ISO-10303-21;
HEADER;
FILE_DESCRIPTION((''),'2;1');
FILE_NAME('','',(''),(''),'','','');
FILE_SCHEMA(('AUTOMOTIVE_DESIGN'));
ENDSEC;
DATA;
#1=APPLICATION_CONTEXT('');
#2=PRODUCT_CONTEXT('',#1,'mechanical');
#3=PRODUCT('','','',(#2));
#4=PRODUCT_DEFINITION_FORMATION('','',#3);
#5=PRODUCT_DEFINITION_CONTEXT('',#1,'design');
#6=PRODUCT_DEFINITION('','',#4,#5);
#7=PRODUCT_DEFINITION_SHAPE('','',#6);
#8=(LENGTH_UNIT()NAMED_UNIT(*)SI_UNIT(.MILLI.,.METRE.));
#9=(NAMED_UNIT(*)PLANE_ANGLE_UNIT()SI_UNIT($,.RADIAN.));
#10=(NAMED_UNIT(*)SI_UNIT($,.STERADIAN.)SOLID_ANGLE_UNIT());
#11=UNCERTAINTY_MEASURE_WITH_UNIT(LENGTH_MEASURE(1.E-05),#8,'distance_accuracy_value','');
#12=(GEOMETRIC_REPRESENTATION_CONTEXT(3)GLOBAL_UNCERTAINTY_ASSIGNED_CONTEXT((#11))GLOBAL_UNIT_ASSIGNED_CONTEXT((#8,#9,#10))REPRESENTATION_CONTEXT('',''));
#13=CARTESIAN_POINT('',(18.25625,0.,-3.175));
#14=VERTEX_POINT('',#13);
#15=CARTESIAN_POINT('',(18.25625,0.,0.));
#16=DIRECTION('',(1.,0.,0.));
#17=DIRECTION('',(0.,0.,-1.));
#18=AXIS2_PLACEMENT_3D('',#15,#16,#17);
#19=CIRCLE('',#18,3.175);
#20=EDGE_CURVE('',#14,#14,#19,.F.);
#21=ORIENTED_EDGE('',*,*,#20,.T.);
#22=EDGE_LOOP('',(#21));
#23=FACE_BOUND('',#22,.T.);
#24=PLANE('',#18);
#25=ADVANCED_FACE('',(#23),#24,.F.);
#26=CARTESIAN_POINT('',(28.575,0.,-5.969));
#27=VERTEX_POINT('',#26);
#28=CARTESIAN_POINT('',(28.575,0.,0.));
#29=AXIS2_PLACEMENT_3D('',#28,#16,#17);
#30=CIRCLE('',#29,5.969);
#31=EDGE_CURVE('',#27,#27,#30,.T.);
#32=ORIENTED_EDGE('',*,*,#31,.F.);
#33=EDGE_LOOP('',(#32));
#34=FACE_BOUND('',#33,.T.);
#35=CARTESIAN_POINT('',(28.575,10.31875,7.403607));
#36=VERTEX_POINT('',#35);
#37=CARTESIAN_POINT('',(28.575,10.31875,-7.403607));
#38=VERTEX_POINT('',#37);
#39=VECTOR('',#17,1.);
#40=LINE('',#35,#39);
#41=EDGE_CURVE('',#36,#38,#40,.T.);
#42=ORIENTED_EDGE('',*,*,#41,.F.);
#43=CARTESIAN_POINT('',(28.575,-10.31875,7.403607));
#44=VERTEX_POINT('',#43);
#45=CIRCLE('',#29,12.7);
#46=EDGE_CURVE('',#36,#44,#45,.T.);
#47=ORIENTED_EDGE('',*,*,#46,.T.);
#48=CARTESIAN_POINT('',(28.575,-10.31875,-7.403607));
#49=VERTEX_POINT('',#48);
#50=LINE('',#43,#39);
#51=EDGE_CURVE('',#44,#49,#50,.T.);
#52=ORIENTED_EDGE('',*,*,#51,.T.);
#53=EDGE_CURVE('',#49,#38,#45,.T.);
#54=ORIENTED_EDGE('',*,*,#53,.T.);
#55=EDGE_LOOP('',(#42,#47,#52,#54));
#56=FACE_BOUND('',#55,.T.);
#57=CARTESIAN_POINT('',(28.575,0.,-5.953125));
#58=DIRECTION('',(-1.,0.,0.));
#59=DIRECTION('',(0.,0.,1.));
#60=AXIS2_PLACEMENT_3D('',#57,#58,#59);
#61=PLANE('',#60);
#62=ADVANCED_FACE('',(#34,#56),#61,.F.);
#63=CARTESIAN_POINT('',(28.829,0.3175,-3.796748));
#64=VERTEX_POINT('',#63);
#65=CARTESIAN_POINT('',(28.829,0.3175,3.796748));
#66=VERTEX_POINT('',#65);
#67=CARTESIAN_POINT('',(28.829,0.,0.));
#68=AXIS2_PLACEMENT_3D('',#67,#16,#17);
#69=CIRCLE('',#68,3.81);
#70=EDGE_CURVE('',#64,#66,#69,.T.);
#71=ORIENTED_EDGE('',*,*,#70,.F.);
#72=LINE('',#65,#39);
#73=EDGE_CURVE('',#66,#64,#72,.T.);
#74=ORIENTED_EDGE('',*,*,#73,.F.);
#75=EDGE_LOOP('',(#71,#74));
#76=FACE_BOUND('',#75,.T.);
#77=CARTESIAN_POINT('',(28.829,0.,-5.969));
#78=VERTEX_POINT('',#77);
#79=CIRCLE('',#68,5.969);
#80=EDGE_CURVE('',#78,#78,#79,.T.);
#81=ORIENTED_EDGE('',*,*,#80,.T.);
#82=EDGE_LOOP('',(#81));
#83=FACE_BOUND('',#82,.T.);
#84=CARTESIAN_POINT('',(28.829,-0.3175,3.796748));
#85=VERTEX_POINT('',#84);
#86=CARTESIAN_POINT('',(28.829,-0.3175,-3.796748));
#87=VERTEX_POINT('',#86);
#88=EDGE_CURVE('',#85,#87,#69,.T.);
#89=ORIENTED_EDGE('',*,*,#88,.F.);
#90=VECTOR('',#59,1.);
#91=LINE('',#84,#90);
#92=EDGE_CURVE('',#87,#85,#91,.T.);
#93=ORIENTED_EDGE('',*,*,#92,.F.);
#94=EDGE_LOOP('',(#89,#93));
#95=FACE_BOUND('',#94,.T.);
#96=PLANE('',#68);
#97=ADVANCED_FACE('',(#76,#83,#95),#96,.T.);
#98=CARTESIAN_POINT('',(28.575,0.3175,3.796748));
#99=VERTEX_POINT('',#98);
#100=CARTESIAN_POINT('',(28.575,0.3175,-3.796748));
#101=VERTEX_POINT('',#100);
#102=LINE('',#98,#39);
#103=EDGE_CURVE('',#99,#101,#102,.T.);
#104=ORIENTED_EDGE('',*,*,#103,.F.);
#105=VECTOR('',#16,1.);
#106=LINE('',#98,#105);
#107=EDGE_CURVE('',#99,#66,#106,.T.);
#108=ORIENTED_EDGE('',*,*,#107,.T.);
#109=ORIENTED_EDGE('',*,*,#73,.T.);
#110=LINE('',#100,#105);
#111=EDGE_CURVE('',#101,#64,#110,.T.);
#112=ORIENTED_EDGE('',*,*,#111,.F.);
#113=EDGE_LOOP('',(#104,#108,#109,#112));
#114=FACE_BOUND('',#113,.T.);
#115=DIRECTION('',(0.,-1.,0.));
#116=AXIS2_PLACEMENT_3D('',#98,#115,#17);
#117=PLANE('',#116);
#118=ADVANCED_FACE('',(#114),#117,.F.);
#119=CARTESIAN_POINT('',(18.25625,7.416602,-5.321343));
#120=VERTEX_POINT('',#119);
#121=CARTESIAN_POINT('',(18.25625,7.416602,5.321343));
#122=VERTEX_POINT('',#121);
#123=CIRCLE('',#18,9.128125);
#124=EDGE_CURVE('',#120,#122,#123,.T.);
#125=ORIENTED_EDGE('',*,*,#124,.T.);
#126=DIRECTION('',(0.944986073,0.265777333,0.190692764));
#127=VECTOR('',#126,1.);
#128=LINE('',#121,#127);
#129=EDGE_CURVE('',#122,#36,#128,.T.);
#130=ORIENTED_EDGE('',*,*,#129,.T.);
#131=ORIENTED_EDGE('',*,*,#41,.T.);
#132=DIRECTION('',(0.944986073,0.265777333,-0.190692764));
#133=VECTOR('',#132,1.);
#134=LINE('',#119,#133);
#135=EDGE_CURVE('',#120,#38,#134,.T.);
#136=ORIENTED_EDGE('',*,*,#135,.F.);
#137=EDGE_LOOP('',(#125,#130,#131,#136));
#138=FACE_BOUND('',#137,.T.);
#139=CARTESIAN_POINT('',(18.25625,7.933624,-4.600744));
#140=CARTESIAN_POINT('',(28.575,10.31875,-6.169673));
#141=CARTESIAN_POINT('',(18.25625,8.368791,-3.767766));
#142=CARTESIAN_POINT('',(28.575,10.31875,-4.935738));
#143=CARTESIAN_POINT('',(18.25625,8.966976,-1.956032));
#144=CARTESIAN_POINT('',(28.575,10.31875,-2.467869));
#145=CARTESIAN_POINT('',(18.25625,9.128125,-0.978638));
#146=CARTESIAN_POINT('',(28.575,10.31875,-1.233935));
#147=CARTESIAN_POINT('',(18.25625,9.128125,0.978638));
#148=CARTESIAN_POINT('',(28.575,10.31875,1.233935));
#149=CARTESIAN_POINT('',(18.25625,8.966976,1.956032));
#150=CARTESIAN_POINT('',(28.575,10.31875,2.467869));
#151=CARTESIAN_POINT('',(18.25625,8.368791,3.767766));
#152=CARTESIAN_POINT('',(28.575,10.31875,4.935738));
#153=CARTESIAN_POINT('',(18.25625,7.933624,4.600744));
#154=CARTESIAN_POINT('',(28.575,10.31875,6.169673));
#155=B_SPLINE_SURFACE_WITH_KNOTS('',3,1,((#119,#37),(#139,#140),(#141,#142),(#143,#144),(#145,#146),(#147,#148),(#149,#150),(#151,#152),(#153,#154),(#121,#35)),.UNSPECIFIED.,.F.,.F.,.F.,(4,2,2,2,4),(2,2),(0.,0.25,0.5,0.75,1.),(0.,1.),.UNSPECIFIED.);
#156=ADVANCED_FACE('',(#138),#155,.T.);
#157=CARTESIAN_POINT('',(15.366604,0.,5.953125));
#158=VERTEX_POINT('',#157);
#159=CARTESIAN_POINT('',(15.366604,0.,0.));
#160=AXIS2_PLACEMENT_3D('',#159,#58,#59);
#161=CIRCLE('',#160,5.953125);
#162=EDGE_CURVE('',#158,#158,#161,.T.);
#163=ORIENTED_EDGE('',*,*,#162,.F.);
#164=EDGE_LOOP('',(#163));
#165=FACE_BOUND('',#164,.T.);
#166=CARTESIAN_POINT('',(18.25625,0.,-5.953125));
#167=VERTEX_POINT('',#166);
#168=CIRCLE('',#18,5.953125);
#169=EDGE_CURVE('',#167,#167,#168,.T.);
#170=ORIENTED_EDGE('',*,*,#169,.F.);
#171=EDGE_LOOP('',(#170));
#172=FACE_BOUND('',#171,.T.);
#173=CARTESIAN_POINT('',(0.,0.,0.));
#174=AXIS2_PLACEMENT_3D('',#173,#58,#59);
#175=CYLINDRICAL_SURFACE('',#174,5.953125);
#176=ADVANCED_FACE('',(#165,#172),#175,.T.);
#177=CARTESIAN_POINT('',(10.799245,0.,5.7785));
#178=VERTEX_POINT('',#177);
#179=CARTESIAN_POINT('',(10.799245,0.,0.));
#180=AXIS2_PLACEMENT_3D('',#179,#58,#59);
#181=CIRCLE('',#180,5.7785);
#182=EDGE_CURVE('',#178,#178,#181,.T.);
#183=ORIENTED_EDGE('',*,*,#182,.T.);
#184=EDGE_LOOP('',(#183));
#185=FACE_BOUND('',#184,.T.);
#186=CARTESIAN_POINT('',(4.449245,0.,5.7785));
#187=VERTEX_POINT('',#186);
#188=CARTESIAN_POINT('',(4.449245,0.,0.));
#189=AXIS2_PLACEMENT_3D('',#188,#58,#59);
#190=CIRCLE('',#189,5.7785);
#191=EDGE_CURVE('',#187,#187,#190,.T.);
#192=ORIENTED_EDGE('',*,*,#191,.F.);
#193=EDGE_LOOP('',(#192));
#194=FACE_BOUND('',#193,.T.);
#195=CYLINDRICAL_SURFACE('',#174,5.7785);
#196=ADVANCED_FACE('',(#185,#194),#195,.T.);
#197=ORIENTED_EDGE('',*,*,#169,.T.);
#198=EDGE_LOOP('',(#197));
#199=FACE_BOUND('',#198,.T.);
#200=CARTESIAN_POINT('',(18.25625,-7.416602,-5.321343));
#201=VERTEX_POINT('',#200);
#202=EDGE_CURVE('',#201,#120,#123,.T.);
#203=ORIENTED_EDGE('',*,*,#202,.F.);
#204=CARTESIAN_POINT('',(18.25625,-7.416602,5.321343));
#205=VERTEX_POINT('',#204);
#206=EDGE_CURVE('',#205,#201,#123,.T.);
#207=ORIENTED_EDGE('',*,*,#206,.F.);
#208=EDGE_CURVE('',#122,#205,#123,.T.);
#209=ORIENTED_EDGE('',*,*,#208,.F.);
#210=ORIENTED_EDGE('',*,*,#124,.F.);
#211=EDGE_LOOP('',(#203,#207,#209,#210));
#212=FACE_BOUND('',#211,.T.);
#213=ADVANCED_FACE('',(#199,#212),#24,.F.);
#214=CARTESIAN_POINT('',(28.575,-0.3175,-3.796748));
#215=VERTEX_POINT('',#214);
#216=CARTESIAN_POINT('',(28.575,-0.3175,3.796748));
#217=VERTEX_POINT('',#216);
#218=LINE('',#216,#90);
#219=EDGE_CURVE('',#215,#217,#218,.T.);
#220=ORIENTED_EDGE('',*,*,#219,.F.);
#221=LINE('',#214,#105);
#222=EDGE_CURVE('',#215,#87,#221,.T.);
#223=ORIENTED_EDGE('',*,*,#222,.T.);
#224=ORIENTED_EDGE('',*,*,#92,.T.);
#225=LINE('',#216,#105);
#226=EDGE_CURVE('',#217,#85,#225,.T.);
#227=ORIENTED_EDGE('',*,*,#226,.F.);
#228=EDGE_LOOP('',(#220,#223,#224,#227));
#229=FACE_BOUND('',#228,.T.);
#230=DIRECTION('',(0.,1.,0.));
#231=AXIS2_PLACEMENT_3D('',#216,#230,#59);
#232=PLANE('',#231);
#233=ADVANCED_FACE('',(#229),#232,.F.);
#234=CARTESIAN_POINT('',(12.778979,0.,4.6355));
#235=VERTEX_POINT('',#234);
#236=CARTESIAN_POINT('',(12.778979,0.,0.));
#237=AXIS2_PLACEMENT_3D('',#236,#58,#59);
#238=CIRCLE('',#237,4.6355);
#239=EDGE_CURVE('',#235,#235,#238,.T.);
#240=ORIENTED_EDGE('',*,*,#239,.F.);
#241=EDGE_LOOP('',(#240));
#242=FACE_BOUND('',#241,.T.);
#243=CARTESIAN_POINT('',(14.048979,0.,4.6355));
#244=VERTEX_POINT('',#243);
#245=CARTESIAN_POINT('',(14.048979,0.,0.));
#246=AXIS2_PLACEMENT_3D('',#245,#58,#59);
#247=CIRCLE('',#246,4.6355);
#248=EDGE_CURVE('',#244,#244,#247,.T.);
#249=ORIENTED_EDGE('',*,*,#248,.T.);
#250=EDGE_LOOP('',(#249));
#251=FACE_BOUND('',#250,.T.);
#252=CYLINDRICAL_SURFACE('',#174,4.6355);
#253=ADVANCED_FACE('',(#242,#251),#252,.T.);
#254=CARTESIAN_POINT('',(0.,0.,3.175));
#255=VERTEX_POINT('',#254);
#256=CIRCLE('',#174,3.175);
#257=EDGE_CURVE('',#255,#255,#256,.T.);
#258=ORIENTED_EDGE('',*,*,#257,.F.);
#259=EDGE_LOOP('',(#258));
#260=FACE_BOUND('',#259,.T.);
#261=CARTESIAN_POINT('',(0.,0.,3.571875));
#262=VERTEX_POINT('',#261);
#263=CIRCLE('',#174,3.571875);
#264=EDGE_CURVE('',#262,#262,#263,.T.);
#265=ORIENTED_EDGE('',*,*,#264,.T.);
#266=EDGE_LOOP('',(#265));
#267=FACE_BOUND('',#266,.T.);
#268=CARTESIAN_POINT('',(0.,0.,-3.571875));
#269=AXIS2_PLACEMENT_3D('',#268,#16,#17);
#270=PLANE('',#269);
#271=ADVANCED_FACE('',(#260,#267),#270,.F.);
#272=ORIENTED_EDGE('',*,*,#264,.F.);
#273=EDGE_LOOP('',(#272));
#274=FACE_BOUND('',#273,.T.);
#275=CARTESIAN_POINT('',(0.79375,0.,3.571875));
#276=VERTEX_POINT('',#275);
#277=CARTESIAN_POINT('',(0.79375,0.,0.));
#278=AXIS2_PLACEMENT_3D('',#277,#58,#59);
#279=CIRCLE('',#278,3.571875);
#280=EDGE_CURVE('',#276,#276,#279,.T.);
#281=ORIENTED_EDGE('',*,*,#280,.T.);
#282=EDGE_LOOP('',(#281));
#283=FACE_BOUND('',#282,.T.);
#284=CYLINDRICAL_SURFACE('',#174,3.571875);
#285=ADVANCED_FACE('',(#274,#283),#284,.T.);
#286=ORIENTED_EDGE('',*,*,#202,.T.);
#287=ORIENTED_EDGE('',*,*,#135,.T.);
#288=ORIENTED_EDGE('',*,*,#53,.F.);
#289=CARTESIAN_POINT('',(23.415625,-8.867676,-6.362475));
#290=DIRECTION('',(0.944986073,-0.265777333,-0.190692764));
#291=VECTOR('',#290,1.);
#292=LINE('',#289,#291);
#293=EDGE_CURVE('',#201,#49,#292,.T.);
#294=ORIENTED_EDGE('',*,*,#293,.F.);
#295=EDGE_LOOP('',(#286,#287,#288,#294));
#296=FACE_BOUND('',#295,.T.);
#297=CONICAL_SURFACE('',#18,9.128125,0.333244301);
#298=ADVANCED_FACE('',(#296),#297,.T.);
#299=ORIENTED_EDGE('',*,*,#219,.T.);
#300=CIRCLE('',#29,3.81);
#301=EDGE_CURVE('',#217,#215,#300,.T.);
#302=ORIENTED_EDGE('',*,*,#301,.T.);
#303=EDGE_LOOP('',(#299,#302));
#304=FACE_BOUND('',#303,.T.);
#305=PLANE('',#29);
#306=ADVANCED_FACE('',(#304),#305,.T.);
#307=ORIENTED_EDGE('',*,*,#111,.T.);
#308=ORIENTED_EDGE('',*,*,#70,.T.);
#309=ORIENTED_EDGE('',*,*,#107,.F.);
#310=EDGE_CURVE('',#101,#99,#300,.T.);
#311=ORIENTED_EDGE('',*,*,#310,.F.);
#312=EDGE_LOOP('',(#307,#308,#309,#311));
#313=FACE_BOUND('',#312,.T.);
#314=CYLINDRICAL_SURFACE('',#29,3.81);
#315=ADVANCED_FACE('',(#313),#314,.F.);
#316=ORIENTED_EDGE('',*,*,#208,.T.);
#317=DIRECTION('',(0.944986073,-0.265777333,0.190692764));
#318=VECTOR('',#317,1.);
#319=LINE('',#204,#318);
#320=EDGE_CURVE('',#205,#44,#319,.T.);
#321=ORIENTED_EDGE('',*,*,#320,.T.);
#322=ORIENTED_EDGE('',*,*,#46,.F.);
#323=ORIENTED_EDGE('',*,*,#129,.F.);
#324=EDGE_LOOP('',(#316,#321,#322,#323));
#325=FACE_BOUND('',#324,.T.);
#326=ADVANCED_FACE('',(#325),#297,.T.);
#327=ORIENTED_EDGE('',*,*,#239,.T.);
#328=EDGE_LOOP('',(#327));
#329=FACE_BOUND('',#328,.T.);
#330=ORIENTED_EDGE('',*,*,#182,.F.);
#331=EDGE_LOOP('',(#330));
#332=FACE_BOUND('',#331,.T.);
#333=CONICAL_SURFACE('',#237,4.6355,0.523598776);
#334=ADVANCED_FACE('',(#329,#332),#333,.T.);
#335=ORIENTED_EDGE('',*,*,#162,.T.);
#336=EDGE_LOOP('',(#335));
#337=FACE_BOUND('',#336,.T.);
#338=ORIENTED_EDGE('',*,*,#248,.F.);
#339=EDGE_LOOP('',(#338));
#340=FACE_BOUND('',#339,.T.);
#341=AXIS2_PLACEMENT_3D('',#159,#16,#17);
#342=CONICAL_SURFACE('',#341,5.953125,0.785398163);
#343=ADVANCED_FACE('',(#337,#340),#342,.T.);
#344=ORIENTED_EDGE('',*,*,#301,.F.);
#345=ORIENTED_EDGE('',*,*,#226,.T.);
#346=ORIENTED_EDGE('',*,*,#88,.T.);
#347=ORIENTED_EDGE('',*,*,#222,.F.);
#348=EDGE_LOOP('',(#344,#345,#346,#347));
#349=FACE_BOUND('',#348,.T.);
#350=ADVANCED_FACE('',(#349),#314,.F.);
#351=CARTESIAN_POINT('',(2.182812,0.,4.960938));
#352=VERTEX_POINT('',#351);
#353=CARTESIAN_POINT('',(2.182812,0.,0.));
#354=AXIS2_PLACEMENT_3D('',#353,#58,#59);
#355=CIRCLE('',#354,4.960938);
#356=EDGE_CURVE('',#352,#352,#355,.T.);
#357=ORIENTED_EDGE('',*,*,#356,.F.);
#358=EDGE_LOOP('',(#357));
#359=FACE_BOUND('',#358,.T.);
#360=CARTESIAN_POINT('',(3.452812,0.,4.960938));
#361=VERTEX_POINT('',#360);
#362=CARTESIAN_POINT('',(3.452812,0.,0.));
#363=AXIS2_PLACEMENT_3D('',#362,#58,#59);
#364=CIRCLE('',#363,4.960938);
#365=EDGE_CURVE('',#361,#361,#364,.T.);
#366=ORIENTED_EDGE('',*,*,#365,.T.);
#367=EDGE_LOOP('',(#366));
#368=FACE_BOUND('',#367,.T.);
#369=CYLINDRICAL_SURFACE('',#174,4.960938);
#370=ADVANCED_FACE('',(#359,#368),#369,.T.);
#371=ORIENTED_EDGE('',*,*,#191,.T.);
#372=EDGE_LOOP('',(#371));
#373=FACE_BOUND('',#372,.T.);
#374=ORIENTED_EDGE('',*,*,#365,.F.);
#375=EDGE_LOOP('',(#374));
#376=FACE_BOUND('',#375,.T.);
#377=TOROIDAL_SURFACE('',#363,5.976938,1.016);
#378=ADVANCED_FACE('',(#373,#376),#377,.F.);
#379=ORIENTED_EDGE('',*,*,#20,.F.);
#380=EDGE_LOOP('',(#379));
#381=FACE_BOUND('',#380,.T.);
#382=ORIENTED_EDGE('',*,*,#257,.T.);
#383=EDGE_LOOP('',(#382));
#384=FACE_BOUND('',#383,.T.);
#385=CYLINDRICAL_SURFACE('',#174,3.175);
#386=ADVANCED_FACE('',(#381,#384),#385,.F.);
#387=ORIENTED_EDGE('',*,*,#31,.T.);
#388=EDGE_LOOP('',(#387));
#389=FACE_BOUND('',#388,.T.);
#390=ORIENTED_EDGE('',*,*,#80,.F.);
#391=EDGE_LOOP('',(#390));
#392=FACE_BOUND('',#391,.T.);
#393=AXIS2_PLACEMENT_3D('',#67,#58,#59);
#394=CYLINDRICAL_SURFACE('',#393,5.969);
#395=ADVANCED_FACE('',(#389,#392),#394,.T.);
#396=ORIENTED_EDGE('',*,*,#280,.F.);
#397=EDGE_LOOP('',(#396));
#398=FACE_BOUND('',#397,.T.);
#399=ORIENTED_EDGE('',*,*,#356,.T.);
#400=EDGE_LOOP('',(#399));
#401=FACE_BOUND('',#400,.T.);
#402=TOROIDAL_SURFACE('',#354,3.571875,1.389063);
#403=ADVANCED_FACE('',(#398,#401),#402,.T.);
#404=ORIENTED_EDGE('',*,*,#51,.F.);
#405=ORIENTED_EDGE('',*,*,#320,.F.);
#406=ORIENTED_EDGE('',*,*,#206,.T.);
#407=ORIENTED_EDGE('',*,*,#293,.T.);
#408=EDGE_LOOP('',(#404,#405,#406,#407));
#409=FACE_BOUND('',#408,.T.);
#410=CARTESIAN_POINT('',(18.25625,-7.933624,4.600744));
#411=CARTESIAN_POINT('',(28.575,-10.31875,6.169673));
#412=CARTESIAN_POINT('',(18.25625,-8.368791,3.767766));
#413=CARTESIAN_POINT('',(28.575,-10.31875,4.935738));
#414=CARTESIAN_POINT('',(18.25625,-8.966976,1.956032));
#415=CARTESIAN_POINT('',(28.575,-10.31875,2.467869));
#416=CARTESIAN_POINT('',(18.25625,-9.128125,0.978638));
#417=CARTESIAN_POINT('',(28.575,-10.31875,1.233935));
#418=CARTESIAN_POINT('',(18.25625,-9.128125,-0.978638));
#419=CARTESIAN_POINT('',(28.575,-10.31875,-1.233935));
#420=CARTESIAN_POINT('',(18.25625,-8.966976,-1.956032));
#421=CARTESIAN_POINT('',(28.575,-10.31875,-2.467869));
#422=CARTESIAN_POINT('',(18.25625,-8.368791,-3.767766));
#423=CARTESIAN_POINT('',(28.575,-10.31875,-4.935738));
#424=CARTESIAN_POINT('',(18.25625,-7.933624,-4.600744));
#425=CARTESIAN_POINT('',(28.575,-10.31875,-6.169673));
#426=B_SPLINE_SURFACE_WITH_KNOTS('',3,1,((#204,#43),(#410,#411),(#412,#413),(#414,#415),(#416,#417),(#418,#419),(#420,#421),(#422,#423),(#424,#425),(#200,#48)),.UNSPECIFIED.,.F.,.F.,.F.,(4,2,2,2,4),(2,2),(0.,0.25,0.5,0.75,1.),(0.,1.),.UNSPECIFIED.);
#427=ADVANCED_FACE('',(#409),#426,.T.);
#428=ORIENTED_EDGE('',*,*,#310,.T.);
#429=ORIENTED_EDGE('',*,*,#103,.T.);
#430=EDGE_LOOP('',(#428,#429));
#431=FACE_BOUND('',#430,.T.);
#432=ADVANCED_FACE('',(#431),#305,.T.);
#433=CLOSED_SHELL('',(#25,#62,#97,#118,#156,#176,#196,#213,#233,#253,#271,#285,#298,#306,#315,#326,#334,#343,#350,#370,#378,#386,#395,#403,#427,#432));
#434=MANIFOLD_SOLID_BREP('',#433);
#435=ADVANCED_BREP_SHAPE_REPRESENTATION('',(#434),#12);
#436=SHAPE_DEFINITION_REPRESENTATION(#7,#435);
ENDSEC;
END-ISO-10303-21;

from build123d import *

# Parameters (mm, degrees)
LOFT1_OUTLINE_W     = 5.953125
LOFT1_OUTLINE_H     = 10.31875
SKETCH5_R           = 5.969
BOSS_EXTRUDE1_DEPTH = 0.254
CUT_EXTRUDE1_DEPTH  = 0.254


with BuildPart() as part:
    # Sketch1 → Revolve1 (revolve)
    with BuildSketch(Plane(origin=(0, 0, 0), x_dir=(1, 0, 0), z_dir=(0, 1, 0)), mode=Mode.PRIVATE) as revolve1_sk:
        with BuildLine():
            Line((0, 3.571875), (0.79375, 3.571875))
            ThreePointArc((0.79375, 3.571875), (1.200596987, 4.554090513), (2.1828125, 4.9609375))
            Line((2.1828125, 4.9609375), (3.4528125, 4.9609375))
            ThreePointArc((3.4528125, 4.9609375), (4.097267114, 5.191485878), (4.449245417, 5.7785))
            Line((4.449245417, 5.7785), (10.799245417, 5.7785))
            Line((10.799245417, 5.7785), (12.77897949, 4.6355))
            Line((12.77897949, 4.6355), (14.04897949, 4.6355))
            Line((14.04897949, 4.6355), (15.36660449, 5.953125))
            Line((15.36660449, 5.953125), (28.575, 5.953125))
            Line((28.575, 5.953125), (28.575, 3.175))
            Line((28.575, 3.175), (0, 3.175))
            Line((0, 3.175), (0, 3.571875))
        make_face()
    revolve(revolve1_sk.sketch.rotate(Axis((0, 0, 0), (1, 0, 0)), 180), axis=Axis((0, 0, 0), (1, 0, 0)))

    # Loft1: read off the stored shape, not the designer's step
    # Loft1 outline → Loft1 (revolve)
    with BuildSketch(Plane.YX):
        with Locations((2.9765625, 23.415625)):
            Rectangle(LOFT1_OUTLINE_W, LOFT1_OUTLINE_H)
    revolve(axis=Axis((0, 0, 0), (1, 0, 0)))

    # Loft1 2: loft between two sections, ruled curve by curve
    loft1_2_from = [
        Edge.make_bspline([(18.25625, -7.416601563, 5.32134262), (18.25625, -7.933624268, 4.60074414), (18.25625, -8.368790825, 3.767765601), (18.25625, -8.966975982, 1.956031503), (18.25625, -9.128125, 0.978637723), (18.25625, -9.128125, -0.978637723), (18.25625, -8.966975982, -1.956031503), (18.25625, -8.368790825, -3.767765601), (18.25625, -7.933624268, -4.60074414), (18.25625, -7.416601563, -5.32134262)], [0, 0, 0, 0, 0.25, 0.25, 0.5, 0.5, 0.75, 0.75, 1, 1, 1, 1], 3),
        Edge.make_bspline([(18.25625, 7.416601563, -5.32134262), (18.25625, 7.933624268, -4.60074414), (18.25625, 8.368790825, -3.767765601), (18.25625, 8.966975982, -1.956031503), (18.25625, 9.128125, -0.978637723), (18.25625, 9.128125, 0.978637723), (18.25625, 8.966975982, 1.956031503), (18.25625, 8.368790825, 3.767765601), (18.25625, 7.933624268, 4.60074414), (18.25625, 7.416601563, 5.32134262)], [0, 0, 0, 0, 0.25, 0.25, 0.5, 0.5, 0.75, 0.75, 1, 1, 1, 1], 3),
        Edge.make_three_point_arc((18.25625, -7.416601563, -5.32134262), (18.25625, 0, -9.128125), (18.25625, 7.416601563, -5.32134262)),
        Edge.make_three_point_arc((18.25625, 7.416601563, 5.32134262), (18.25625, 0, 9.128125), (18.25625, -7.416601563, 5.32134262)),
    ]
    loft1_2_to = [
        Edge.make_bspline([(28.575, -10.31875, 7.403607123), (28.575, -10.31875, 6.169672603), (28.575, -10.31875, 4.935738082), (28.575, -10.31875, 2.467869041), (28.575, -10.31875, 1.233934521), (28.575, -10.31875, -1.233934521), (28.575, -10.31875, -2.467869041), (28.575, -10.31875, -4.935738082), (28.575, -10.31875, -6.169672603), (28.575, -10.31875, -7.403607123)], [0, 0, 0, 0, 0.25, 0.25, 0.5, 0.5, 0.75, 0.75, 1, 1, 1, 1], 3),
        Edge.make_bspline([(28.575, 10.31875, -7.403607123), (28.575, 10.31875, -6.169672603), (28.575, 10.31875, -4.935738082), (28.575, 10.31875, -2.467869041), (28.575, 10.31875, -1.233934521), (28.575, 10.31875, 1.233934521), (28.575, 10.31875, 2.467869041), (28.575, 10.31875, 4.935738082), (28.575, 10.31875, 6.169672603), (28.575, 10.31875, 7.403607123)], [0, 0, 0, 0, 0.25, 0.25, 0.5, 0.5, 0.75, 0.75, 1, 1, 1, 1], 3),
        Edge.make_three_point_arc((28.575, -10.31875, -7.403607123), (28.575, 0, -12.7), (28.575, 10.31875, -7.403607123)),
        Edge.make_three_point_arc((28.575, 10.31875, 7.403607123), (28.575, 0, 12.7), (28.575, -10.31875, 7.403607123)),
    ]
    loft1_2 = Solid(Shell([*[Face.make_surface_from_curves(loft1_2_from[k], loft1_2_to[k]) for k in range(4)], Face(Wire(loft1_2_from)), Face(Wire(loft1_2_to))]))
    add(loft1_2)

    # Sketch5 → Boss-Extrude1 (add)
    with BuildSketch(Plane(origin=(28.575, 0, 0), x_dir=(0, 0, -1), z_dir=(1, 0, 0))):
        Circle(SKETCH5_R)
    extrude(amount=BOSS_EXTRUDE1_DEPTH)

    # Sketch6 → Cut-Extrude1 (cut)
    with BuildSketch(Plane(origin=(28.829, 0, 0), x_dir=(0, 0, -1), z_dir=(1, 0, 0))):
        with BuildLine():
            Line((-3.796747786, 0.3175), (3.796747786, 0.3175))
            ThreePointArc((3.796747786, 0.3175), (0, 3.81), (-3.796747786, 0.3175))
        make_face()
        with BuildLine():
            Line((-3.796747786, -0.3175), (3.796747786, -0.3175))
            ThreePointArc((3.796747786, -0.3175), (0, -3.81), (-3.796747786, -0.3175))
        make_face()
    extrude(amount=-CUT_EXTRUDE1_DEPTH, mode=Mode.SUBTRACT)


solid = part.part
